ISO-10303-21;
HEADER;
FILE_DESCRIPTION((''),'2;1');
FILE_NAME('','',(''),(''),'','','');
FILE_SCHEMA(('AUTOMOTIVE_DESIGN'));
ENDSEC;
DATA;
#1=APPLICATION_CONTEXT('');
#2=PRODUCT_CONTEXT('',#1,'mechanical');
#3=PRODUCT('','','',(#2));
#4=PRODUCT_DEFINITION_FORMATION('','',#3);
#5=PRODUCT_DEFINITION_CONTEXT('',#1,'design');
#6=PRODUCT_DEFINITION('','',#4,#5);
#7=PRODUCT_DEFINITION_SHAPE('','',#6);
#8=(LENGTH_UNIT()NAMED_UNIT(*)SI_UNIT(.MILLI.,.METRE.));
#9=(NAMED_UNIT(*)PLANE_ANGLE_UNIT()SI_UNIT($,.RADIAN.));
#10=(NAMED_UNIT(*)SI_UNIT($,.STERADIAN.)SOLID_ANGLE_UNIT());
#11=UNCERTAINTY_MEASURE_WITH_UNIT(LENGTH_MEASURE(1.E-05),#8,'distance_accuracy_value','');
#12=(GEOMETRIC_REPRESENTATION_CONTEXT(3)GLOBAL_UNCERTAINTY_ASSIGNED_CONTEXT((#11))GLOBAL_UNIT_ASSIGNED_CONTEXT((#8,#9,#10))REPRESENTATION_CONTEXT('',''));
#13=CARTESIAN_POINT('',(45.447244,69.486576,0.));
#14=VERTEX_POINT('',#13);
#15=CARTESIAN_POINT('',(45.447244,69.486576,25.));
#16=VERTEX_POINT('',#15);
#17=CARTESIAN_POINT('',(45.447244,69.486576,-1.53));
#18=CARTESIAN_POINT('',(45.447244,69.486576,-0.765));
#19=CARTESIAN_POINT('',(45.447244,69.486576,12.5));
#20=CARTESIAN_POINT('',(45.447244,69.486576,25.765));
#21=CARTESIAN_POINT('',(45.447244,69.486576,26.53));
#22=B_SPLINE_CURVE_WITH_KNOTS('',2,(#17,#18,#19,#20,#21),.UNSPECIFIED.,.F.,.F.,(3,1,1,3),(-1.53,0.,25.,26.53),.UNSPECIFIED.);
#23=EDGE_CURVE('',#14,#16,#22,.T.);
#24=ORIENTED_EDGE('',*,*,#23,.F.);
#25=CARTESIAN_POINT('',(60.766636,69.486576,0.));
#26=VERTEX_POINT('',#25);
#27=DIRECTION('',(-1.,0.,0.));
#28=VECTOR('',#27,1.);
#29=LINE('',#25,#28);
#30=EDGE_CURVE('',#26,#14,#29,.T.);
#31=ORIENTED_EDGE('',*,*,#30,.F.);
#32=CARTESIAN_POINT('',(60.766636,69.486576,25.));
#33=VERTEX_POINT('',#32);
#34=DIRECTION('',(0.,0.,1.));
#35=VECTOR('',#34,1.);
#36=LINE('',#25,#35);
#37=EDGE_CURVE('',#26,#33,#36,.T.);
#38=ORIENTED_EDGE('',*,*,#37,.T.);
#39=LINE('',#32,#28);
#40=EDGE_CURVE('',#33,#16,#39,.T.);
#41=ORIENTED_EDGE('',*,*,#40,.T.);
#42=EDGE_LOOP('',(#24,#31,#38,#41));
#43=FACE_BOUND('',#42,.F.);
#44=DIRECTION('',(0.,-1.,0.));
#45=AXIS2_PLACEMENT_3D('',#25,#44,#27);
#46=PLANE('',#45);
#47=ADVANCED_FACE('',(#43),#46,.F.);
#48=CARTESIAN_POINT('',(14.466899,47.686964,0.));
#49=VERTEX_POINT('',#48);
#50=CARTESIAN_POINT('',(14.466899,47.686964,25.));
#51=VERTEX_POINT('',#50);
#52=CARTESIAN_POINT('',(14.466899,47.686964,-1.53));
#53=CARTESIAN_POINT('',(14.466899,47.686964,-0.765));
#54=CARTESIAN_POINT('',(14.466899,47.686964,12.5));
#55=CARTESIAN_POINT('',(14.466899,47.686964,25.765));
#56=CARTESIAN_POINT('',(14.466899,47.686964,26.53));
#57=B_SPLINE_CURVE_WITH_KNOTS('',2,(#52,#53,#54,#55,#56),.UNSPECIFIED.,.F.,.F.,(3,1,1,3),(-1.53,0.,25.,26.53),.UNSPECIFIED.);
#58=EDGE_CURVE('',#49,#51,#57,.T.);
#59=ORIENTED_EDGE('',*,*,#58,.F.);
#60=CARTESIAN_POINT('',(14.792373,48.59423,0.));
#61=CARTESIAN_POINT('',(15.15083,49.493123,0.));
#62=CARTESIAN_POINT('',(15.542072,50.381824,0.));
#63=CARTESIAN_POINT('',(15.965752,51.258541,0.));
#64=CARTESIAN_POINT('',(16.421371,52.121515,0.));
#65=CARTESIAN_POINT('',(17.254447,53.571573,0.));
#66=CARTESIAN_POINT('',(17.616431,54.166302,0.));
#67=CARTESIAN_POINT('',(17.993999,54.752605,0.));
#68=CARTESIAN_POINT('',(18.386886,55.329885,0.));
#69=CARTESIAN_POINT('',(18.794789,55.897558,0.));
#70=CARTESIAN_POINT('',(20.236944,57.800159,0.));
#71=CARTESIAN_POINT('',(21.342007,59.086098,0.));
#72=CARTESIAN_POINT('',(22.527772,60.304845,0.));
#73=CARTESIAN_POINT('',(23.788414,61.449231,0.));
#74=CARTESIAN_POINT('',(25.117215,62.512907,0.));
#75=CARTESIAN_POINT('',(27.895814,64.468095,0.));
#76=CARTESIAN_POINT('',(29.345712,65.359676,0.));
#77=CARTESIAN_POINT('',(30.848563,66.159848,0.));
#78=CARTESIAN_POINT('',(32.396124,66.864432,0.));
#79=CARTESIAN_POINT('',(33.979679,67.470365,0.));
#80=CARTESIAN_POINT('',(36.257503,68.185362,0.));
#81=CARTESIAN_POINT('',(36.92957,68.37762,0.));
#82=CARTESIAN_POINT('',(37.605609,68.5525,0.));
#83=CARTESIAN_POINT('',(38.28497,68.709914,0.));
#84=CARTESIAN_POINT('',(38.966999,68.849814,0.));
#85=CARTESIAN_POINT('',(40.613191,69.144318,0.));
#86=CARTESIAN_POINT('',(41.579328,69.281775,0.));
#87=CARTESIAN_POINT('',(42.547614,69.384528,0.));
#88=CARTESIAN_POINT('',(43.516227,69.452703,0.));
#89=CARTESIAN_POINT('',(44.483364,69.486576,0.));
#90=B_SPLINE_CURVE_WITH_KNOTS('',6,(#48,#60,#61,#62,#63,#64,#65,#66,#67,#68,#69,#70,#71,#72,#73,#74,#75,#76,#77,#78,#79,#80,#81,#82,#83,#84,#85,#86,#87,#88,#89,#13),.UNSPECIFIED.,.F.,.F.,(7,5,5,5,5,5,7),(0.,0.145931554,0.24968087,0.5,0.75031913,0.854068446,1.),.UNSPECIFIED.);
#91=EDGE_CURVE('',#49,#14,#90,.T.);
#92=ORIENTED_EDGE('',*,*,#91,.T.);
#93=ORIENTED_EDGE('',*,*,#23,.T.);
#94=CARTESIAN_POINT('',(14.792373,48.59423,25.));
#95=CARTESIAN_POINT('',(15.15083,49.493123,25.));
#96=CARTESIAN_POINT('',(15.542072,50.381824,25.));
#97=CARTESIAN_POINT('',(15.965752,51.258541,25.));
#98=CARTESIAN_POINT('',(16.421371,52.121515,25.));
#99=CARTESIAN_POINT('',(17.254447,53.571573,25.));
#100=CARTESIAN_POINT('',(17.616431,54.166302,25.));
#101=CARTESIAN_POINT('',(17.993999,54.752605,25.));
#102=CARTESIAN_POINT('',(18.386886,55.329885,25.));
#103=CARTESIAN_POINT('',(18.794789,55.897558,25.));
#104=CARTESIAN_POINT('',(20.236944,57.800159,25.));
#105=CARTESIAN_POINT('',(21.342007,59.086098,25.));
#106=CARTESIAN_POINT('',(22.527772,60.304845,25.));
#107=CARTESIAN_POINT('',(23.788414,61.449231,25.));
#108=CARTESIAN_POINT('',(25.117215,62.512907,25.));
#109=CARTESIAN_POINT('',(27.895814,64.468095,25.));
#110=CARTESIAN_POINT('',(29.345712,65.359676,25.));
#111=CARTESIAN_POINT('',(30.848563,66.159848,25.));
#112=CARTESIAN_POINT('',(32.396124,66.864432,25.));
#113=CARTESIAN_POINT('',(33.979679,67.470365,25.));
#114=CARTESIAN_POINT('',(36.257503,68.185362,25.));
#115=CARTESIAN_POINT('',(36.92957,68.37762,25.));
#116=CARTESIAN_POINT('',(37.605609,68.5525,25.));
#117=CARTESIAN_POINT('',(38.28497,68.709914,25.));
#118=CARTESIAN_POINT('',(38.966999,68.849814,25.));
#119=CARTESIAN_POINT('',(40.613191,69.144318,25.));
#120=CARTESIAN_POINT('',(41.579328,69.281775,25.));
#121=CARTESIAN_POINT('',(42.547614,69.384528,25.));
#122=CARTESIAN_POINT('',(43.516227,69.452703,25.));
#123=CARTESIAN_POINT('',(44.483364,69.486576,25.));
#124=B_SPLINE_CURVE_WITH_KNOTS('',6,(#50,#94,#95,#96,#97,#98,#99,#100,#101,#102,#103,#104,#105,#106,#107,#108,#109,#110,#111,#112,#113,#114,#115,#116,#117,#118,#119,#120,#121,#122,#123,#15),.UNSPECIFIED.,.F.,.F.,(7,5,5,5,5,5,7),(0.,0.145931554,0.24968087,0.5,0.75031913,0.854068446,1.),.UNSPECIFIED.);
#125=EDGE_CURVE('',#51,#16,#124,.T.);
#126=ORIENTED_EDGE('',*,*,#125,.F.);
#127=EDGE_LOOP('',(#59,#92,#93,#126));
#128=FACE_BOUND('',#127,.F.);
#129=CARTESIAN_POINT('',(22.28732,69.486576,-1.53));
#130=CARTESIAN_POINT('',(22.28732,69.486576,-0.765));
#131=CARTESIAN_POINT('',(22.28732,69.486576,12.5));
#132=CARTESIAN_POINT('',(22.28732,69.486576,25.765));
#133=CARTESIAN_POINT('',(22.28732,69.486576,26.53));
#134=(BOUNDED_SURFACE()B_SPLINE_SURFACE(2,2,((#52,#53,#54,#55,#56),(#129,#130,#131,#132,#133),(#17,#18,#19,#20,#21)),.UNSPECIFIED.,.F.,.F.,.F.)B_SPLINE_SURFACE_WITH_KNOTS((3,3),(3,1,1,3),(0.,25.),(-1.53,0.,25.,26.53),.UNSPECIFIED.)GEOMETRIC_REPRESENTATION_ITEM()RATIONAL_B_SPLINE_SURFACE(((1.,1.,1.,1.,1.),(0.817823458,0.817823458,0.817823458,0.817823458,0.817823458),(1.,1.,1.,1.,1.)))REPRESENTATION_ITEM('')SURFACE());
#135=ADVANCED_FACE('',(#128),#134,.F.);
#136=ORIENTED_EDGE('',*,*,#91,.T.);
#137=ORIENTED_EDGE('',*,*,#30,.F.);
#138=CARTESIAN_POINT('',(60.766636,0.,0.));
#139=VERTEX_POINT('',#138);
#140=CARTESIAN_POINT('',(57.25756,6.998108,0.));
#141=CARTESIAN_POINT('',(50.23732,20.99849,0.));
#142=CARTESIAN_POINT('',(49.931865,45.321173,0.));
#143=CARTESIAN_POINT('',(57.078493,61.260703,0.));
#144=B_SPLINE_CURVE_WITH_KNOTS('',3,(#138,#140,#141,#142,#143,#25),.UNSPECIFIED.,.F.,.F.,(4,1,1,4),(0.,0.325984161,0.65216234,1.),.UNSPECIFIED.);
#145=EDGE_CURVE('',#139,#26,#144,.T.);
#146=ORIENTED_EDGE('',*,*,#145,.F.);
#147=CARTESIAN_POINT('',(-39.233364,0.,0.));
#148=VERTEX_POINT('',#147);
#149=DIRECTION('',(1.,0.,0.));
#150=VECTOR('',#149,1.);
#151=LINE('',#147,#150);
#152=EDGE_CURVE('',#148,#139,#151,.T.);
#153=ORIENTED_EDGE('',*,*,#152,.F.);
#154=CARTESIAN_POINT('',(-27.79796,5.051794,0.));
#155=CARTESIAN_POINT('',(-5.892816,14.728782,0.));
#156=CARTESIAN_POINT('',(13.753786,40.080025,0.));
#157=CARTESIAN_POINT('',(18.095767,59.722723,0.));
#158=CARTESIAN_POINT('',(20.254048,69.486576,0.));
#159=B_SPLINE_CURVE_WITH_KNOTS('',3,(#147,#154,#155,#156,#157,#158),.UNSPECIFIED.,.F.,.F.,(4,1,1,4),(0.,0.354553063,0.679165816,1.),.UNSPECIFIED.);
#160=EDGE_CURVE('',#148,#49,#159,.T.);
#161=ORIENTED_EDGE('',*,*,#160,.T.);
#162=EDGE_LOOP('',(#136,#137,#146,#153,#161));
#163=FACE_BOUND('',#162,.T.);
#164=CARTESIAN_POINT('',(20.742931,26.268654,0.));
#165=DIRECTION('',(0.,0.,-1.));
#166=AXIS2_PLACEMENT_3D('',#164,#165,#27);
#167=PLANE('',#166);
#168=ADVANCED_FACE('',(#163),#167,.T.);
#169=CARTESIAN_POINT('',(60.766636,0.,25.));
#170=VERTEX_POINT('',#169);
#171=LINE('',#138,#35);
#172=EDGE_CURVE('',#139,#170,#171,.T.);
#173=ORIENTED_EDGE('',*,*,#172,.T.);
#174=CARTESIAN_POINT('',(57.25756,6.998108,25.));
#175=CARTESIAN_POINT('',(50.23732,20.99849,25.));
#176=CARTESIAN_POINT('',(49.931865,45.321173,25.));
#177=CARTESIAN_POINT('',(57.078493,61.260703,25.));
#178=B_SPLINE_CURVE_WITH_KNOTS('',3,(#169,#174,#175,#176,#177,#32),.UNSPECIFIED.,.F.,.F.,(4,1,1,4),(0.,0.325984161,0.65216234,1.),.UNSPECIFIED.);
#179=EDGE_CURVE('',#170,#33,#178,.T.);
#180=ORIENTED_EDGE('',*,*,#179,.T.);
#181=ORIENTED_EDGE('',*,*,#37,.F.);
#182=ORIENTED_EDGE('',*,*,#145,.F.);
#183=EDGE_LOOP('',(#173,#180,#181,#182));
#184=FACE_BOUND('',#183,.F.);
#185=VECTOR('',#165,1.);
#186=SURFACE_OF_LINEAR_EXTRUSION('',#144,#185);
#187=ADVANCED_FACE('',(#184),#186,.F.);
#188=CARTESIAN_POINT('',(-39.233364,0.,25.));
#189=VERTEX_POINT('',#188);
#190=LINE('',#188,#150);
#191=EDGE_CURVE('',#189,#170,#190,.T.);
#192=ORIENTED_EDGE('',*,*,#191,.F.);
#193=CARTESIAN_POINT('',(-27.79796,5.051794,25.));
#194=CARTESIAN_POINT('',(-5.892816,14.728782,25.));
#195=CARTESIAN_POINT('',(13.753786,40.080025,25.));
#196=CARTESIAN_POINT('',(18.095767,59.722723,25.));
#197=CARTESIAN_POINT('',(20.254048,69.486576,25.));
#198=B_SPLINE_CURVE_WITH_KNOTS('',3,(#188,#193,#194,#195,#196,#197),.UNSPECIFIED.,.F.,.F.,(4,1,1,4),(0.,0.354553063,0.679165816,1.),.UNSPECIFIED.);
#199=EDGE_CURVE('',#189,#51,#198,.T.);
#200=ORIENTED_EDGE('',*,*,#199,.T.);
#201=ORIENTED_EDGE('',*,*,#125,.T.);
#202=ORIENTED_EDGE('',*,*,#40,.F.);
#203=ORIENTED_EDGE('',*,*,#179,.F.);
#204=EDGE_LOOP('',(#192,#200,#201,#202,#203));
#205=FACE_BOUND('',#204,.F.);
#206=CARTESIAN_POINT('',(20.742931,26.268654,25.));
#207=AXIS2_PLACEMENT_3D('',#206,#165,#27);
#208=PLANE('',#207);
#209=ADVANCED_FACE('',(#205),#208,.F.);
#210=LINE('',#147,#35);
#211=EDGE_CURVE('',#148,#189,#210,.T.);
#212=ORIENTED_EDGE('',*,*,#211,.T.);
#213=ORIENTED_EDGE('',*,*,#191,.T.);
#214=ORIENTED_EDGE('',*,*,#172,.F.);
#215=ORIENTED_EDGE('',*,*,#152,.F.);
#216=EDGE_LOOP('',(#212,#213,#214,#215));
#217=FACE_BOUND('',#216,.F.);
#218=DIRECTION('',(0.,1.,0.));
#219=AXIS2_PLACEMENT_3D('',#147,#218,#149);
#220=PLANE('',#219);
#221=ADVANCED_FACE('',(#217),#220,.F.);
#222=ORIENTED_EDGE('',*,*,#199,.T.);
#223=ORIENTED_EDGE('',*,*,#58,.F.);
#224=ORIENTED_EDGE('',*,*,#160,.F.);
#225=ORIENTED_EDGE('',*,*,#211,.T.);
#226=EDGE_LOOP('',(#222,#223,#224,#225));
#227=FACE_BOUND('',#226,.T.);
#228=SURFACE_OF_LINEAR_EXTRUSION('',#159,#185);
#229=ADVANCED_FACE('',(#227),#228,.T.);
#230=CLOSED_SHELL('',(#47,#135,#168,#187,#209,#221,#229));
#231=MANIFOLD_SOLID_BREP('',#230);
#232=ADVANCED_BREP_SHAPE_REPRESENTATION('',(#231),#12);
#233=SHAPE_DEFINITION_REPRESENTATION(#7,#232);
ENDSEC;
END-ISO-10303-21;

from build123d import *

# Parameters (mm, degrees)
F1_DEPTH = 25
F2_R     = 32.913540843


with BuildPart() as f1:
    # F0 (on Top) → F1 (new body)
    with BuildSketch(Plane.XY):
        with BuildLine():
            add(Edge.make_bspline(
                [(-39.2333641648, 0), (-27.7979598726, 5.0517939803), (-5.8928164583, 14.728782114), (13.7537860075, 40.0800253408), (18.095766656, 59.7227230679), (20.2540475875, 69.486575876)],
                knots=[0, 0, 0, 0, 0.354553063, 0.6791658164, 1, 1, 1, 1], degree=3))
            Line((-39.2333641648, 0), (60.7666358352, 0))
            add(Edge.make_bspline(
                [(60.7666358352, 0), (57.2575599986, 6.9981081509), (50.237319798, 20.9984895783), (49.931864791, 45.321172526), (57.0784932504, 61.2607026379), (60.7666358352, 69.486575876)],
                knots=[0, 0, 0, 0, 0.3259841606, 0.65216234, 1, 1, 1, 1], degree=3))
            Line((60.7666358352, 69.486575876), (52.7530318439, 69.486575876))
            Line((52.7530318439, 69.486575876), (20.2540475875, 69.486575876))
        make_face()
    extrude(amount=F1_DEPTH)

    # F2
    f2_edges = [f1.edges().sort_by_distance(p)[0] for p in [
        (20.254048, 69.486576, 12.5),
    ]]
    fillet(f2_edges, radius=F2_R)


solid = f1.part
